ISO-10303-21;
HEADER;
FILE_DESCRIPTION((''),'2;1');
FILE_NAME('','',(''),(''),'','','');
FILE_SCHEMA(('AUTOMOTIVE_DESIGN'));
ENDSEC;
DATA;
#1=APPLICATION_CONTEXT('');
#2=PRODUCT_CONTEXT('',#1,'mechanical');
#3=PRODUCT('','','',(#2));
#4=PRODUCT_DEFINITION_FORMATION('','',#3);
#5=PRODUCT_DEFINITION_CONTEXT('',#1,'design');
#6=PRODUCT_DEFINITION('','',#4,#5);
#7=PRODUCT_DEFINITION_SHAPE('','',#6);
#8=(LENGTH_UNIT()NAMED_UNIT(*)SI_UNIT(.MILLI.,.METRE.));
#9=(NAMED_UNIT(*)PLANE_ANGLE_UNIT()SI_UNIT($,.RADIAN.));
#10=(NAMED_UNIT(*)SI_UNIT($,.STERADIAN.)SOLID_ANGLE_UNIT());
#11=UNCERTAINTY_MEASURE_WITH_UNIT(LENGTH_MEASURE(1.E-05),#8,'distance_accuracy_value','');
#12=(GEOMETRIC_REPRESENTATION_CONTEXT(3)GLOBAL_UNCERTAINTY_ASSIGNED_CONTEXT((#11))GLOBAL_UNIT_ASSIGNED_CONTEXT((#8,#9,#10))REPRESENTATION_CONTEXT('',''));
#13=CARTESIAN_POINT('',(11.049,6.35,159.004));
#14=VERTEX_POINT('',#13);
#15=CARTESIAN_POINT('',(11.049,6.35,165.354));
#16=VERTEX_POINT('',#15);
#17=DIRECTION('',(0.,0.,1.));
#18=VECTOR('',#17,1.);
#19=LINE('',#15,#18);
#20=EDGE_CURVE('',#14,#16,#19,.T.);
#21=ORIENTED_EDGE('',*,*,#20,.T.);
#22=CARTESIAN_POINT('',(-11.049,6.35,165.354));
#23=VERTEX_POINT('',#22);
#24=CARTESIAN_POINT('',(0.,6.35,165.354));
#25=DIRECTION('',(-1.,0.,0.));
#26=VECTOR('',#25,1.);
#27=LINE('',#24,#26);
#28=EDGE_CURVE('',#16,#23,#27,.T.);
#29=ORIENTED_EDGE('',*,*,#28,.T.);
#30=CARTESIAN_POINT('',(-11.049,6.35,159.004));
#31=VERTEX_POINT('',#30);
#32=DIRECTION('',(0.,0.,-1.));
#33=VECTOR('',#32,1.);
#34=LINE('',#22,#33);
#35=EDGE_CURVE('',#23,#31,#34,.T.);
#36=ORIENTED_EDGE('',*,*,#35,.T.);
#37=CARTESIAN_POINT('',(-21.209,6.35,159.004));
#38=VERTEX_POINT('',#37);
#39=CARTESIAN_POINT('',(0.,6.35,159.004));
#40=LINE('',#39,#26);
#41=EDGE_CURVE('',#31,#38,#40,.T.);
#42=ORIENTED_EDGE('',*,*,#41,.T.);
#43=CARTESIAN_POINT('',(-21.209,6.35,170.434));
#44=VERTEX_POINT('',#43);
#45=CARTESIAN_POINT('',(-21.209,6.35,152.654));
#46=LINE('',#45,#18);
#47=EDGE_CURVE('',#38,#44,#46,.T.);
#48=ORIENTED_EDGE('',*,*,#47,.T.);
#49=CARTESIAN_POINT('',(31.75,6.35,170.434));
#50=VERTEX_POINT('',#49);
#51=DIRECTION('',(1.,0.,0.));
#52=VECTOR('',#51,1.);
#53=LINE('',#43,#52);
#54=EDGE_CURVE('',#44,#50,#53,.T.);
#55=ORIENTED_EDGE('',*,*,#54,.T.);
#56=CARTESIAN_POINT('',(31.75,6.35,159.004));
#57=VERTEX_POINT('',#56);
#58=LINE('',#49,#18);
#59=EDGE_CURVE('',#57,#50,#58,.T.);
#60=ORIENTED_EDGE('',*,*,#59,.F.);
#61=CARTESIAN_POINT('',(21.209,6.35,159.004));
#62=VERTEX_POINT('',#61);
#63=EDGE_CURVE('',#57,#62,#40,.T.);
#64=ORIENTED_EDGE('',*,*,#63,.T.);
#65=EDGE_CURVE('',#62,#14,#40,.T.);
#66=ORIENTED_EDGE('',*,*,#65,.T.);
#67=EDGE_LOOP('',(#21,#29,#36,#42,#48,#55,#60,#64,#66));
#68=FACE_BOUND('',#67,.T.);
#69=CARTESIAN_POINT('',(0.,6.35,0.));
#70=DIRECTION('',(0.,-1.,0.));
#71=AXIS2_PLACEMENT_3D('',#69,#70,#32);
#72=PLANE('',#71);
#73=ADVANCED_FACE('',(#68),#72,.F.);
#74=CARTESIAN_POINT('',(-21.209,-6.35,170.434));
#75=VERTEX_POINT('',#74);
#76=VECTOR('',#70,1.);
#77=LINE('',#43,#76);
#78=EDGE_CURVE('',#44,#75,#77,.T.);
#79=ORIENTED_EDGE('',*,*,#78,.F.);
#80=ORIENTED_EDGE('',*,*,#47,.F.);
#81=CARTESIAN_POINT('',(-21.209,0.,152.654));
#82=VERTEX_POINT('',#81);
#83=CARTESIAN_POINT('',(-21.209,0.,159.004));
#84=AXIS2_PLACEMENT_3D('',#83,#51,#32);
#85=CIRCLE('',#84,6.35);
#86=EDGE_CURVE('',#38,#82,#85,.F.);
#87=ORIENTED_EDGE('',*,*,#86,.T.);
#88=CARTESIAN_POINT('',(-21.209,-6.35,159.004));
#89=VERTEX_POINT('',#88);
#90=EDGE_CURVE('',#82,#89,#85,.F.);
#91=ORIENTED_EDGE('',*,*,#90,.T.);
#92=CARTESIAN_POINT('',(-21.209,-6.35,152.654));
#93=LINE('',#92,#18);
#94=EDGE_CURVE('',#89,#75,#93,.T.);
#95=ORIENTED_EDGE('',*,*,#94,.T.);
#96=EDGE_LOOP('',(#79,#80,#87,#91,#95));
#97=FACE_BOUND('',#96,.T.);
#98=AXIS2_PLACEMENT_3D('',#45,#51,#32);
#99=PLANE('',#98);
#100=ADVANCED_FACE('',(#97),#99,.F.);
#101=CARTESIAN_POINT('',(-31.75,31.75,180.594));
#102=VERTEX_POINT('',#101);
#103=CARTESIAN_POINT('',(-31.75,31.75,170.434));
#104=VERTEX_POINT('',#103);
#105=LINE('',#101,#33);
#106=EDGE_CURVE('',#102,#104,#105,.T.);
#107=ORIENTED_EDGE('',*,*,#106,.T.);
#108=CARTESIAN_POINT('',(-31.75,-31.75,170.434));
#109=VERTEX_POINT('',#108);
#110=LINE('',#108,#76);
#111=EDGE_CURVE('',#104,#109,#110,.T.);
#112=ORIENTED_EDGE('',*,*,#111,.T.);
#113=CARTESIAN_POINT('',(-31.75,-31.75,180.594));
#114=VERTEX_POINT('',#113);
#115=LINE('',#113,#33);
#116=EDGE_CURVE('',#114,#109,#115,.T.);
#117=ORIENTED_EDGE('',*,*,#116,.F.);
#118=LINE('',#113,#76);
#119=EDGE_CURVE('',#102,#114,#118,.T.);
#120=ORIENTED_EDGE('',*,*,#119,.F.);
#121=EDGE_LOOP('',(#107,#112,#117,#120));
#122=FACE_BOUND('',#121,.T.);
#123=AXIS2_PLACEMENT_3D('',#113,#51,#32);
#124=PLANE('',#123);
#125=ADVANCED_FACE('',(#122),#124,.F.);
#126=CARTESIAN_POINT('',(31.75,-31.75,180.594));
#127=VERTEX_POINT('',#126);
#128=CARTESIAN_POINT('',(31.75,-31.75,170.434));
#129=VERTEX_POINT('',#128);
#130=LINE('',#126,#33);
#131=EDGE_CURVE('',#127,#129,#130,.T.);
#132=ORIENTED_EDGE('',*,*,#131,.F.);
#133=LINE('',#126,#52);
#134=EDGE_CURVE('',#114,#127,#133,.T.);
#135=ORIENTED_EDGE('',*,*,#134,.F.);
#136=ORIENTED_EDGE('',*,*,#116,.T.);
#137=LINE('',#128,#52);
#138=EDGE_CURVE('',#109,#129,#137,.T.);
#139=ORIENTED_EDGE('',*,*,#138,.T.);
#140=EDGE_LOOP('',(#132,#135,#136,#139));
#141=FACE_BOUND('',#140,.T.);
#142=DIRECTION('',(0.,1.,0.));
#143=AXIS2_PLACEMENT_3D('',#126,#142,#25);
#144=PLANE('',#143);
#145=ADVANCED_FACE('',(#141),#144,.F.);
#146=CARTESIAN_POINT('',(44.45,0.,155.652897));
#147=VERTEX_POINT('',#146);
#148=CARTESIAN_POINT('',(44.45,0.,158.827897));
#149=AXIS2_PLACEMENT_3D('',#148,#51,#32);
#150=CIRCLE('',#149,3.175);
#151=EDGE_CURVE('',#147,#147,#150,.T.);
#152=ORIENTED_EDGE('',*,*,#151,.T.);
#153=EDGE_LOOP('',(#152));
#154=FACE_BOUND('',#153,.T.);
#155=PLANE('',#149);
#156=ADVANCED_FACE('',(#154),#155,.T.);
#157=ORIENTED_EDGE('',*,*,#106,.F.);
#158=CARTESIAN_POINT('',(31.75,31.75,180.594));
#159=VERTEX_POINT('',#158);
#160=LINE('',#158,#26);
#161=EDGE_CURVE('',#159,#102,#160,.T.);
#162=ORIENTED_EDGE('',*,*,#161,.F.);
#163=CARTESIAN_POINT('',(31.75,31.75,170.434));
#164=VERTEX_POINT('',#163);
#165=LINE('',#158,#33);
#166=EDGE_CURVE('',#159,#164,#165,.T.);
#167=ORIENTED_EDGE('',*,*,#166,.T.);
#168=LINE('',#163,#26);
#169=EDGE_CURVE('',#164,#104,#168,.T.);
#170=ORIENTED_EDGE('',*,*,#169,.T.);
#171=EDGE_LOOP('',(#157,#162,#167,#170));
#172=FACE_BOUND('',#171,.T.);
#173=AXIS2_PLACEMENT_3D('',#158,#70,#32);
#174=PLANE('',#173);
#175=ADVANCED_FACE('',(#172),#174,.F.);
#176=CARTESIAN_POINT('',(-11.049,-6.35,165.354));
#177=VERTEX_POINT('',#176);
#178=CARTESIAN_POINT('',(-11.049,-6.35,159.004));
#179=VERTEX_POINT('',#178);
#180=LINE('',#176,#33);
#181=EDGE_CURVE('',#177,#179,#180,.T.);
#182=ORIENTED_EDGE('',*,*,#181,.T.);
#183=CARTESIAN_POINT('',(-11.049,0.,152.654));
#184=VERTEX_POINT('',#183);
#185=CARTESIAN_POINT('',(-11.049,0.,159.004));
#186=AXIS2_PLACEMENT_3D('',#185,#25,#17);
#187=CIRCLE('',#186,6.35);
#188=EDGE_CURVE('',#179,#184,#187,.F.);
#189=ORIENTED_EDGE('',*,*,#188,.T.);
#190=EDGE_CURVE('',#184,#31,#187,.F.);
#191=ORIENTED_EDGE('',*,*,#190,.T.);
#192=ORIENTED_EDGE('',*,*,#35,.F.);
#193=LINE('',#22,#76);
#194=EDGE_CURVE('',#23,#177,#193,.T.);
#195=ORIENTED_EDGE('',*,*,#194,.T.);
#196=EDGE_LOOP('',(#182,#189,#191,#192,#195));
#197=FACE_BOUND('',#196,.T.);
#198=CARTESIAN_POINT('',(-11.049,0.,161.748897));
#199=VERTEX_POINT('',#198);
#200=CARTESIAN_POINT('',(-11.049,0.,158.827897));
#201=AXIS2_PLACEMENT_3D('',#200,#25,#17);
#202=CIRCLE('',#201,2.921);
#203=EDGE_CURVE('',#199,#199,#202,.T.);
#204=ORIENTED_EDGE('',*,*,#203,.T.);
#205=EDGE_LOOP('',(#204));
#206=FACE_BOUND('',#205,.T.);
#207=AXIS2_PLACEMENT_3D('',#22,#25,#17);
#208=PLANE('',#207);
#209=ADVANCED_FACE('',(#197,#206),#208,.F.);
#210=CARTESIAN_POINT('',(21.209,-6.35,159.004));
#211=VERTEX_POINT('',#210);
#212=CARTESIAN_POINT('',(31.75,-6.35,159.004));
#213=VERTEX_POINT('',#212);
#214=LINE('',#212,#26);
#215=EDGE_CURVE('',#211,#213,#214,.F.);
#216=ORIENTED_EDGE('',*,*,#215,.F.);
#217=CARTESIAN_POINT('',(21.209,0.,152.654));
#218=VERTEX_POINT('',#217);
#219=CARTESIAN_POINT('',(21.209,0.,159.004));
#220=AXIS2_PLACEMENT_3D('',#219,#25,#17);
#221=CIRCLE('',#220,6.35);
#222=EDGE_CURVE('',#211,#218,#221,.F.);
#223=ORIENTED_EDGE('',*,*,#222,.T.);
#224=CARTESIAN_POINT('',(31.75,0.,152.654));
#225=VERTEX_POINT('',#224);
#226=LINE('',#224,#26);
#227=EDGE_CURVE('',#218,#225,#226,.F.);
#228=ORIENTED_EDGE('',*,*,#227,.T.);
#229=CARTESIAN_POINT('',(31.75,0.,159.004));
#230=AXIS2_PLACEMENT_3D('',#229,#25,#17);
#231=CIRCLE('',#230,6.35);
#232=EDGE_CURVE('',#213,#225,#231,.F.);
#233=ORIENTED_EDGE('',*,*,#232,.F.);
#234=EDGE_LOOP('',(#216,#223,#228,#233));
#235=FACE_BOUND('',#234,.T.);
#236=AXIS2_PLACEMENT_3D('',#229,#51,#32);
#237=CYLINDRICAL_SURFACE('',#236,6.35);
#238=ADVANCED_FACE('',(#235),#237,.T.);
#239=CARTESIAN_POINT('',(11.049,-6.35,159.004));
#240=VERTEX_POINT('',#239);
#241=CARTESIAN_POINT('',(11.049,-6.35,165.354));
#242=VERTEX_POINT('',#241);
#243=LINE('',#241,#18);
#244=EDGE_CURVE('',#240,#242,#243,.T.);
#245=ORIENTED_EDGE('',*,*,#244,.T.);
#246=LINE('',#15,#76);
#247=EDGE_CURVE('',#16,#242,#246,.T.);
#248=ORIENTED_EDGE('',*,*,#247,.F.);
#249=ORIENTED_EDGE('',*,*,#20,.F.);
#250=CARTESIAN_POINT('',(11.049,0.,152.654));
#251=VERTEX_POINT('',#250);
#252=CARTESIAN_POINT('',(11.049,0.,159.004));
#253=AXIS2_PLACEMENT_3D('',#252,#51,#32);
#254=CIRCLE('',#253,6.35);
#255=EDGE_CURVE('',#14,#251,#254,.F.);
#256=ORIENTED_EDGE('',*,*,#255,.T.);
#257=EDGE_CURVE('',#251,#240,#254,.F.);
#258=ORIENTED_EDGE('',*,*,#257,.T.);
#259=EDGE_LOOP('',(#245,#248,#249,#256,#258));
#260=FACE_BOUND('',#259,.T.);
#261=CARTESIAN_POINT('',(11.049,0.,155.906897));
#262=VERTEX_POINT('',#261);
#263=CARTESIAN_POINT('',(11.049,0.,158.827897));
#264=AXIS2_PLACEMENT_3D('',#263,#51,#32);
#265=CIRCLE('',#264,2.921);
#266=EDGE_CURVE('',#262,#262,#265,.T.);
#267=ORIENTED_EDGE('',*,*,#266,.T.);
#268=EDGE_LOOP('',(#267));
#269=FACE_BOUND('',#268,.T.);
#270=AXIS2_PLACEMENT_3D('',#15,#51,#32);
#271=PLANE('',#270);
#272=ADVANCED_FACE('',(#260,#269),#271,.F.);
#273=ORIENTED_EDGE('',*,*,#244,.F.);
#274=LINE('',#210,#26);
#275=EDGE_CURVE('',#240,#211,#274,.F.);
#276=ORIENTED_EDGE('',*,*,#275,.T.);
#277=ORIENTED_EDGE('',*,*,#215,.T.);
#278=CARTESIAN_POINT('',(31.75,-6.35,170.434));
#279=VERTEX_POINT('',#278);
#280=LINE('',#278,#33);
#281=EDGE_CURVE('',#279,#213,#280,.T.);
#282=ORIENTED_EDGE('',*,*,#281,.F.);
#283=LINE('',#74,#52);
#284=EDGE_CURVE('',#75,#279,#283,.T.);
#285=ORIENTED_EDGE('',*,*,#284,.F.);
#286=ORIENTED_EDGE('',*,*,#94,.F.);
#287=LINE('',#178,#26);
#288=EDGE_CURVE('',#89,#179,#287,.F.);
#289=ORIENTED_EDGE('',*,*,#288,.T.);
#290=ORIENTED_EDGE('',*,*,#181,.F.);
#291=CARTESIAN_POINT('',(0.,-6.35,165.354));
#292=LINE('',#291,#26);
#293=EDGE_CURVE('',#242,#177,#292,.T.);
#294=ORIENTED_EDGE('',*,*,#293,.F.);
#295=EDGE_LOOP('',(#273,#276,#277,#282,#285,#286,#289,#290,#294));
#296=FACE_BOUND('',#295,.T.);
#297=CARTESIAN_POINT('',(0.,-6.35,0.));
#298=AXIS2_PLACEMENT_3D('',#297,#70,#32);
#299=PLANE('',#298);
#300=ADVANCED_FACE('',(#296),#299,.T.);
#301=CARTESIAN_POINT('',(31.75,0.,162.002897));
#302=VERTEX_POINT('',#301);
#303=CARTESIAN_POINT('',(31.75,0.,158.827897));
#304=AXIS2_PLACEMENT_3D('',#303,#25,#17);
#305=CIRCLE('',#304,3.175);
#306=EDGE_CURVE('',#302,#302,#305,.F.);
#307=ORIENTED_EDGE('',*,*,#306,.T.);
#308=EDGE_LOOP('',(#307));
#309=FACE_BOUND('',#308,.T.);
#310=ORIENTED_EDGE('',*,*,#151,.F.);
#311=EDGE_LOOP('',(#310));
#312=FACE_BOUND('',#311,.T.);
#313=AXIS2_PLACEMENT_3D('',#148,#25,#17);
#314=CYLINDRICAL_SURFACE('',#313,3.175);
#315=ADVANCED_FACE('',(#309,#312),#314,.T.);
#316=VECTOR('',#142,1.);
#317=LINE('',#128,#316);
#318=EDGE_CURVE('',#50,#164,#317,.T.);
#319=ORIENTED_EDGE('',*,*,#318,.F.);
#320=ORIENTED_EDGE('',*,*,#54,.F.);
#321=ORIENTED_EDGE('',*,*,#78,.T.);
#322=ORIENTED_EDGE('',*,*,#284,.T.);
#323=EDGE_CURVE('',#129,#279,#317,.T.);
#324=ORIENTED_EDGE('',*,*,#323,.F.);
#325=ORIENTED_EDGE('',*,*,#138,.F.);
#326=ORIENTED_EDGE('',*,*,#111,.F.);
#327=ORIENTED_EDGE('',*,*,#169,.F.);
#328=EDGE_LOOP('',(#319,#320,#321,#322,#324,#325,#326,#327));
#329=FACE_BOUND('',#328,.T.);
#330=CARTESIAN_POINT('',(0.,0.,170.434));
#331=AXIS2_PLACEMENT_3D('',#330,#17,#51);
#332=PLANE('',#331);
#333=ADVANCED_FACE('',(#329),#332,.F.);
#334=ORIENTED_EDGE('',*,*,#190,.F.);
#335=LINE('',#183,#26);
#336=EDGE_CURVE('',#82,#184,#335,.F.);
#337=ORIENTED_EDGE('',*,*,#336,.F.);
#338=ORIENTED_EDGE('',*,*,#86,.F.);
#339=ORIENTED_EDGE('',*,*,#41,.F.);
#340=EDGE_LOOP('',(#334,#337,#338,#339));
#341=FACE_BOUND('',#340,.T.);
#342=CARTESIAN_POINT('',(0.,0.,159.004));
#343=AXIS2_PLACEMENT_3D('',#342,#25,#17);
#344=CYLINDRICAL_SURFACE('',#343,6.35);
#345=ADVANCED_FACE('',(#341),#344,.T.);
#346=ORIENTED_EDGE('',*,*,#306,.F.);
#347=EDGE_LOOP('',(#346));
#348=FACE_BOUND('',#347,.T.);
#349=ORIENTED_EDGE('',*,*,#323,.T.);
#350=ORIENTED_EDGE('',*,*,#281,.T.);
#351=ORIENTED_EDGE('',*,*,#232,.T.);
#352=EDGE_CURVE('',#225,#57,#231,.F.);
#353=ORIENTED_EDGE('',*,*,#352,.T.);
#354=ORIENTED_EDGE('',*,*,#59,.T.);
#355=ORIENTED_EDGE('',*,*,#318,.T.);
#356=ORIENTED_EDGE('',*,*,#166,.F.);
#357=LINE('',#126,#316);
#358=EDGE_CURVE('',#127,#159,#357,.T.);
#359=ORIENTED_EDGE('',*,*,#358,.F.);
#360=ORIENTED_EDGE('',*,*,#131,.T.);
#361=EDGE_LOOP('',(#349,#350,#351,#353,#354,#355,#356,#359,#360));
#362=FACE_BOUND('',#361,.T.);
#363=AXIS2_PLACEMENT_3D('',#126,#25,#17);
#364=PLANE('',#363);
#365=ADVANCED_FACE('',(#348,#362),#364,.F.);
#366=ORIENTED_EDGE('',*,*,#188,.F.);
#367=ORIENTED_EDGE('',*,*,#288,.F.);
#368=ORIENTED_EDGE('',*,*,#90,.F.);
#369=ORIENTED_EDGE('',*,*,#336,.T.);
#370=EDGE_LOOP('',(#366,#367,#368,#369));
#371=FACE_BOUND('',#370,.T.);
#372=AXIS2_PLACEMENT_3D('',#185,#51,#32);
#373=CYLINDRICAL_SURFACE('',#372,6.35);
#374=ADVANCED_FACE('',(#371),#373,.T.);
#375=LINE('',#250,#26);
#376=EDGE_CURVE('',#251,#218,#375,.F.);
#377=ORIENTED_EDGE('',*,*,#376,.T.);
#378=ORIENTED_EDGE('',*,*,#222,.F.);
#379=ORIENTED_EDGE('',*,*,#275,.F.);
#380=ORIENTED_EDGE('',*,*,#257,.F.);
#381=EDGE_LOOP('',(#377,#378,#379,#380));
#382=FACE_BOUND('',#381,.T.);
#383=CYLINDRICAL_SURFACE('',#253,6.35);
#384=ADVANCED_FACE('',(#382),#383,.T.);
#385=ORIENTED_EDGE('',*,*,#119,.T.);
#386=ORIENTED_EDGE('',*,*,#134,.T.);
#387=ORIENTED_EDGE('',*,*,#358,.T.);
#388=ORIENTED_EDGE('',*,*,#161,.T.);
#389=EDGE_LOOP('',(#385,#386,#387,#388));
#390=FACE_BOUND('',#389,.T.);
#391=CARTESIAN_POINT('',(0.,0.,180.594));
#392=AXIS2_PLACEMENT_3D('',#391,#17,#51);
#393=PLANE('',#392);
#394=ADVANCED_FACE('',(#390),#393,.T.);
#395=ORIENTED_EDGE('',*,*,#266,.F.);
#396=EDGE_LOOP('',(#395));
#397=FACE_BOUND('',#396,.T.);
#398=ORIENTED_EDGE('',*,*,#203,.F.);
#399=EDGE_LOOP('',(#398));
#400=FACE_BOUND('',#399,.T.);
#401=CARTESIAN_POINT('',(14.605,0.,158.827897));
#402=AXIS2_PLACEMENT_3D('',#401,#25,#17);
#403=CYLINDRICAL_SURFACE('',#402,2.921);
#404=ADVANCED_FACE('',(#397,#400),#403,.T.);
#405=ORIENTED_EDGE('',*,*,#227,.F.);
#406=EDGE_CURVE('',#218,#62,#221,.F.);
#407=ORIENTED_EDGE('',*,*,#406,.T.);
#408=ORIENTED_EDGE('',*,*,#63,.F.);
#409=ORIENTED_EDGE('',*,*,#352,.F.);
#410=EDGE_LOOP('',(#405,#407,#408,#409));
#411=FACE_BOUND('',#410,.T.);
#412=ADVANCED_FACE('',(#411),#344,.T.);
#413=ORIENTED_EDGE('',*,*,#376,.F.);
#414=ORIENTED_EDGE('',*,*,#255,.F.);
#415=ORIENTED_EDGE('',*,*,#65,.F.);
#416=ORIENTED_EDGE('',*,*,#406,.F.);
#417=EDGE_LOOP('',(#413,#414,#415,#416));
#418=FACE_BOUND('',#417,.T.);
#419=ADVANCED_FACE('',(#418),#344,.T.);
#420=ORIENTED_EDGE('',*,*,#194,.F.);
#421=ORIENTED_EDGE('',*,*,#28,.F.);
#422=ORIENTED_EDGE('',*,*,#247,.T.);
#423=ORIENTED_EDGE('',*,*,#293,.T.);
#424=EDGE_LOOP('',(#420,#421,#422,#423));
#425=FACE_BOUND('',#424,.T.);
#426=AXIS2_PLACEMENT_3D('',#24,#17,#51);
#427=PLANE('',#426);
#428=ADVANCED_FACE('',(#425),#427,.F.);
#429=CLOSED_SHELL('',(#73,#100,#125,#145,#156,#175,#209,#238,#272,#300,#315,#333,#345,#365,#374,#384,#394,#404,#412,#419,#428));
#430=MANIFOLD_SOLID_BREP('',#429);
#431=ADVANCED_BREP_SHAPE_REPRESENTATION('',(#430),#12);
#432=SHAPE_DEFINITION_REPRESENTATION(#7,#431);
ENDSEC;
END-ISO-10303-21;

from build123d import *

# Parameters (mm, degrees)
SKETCH1_R            = 12.7
BOSS_EXTRUDE3_DEPTH  = 152.4
SKETCH9_R            = 6.35
BOSS_EXTRUDE6_DEPTH  = 19.05
SKETCH16_W           = 25.4
SKETCH16_H           = 63.5
CUT_EXTRUDE2_DEPTH   = 155.762931731
SKETCH17_W           = 25.4
SKETCH17_H           = 63.5
CUT_EXTRUDE3_DEPTH   = 155.762931731
SKETCH19_R           = 2.54
CUT_EXTRUDE5_DEPTH   = 155.762931731
SKETCH21_W           = 21.59
SKETCH21_H           = 12.7
BOSS_EXTRUDE8_DEPTH  = 12.7
BOSS_EXTRUDE9_DEPTH  = 6.35
SKETCH25_R           = 3.175
CUT_EXTRUDE7_DEPTH   = 21.59
SKETCH29_R           = 2.921
BOSS_EXTRUDE10_DEPTH = 35.814
FILLET2_R            = 6.35
FILLET3_R            = 6.35
SKETCH31_W           = 63.5
SKETCH31_H           = 63.5
BOSS_EXTRUDE11_DEPTH = 10.16
SKETCH32_W           = 127
SKETCH32_H           = 307.417558359
CUT_EXTRUDE8_DEPTH   = 195.047688304
SKETCH33_W           = 21.59
SKETCH33_H           = 12.7
CUT_EXTRUDE9_DEPTH   = 195.047688304
SKETCH29_2_R         = 2.921
BOSS_EXTRUDE12_DEPTH = 35.814
SKETCH37_W           = 17.78
SKETCH37_H           = 12.7
BOSS_EXTRUDE13_DEPTH = 10.541
FILLET5_R            = 6.35
SKETCH38_R           = 3.175
BOSS_EXTRUDE14_DEPTH = 12.7


with BuildPart() as part:
    # Sketch1 → Boss-Extrude3 (new, symmetric)
    with BuildSketch(Plane.XY):
        with Locations(Location((0, 0, 0), (0, 0, 180))):
            Circle(SKETCH1_R)
    extrude(amount=BOSS_EXTRUDE3_DEPTH, both=True)

    # Sketch9 → Boss-Extrude6 (add, symmetric)
    with BuildSketch(Plane(origin=(0, 0, 0), x_dir=(0, 0, -1), z_dir=(1, 0, 0))):
        with Locations((-25.4, 0)):
            Circle(SKETCH9_R)
    extrude(amount=BOSS_EXTRUDE6_DEPTH, both=True)

    # Sketch16 → Cut-Extrude2 (cut, through all)
    with BuildSketch(Plane(origin=(0, -6.35, 0), x_dir=(1, 0, 0), z_dir=(0, 1, 0))):
        with Locations((0, 120.65)):
            Rectangle(SKETCH16_W, SKETCH16_H)
    extrude(amount=-CUT_EXTRUDE2_DEPTH, mode=Mode.SUBTRACT)

    # Sketch17 → Cut-Extrude3 (cut, through all)
    with BuildSketch(Plane(origin=(0, 6.35, 0), x_dir=(1, 0, 0), z_dir=(0, 1, 0))):
        with Locations((0, 120.65)):
            Rectangle(SKETCH17_W, SKETCH17_H)
    extrude(amount=CUT_EXTRUDE3_DEPTH, mode=Mode.SUBTRACT)

    # Sketch19 → Cut-Extrude5 (cut, through all)
    with BuildSketch(Plane(origin=(0, 6.35, 0), x_dir=(1, 0, 0), z_dir=(0, 1, 0))):
        with Locations(Location((0, 100.80625, 0), (0, 0, 270))):
            Circle(SKETCH19_R)
        with Locations(Location((0, 136.525, 0), (0, 0, 270))):
            Circle(SKETCH19_R)
    extrude(amount=-CUT_EXTRUDE5_DEPTH, mode=Mode.SUBTRACT)

    # Sketch21 → Boss-Extrude8 (add)
    with BuildSketch(Plane.XY.offset(152.4)):
        Rectangle(SKETCH21_W, SKETCH21_H)
    extrude(amount=BOSS_EXTRUDE8_DEPTH)

    # Sketch25 → Cut-Extrude7 (cut)
    with BuildSketch(Plane.ZY.offset(10.795)):
        with Locations(Location((158.75, 0, 0), (0, 0, 270))):
            Circle(SKETCH25_R)
    extrude(amount=-CUT_EXTRUDE7_DEPTH, mode=Mode.SUBTRACT)

    # Fillet3
    fillet3_edges = [part.edges().sort_by_distance(p)[0] for p in [
        (0, -6.35, 165.1),
        (0, 6.35, 165.1),
    ]]
    fillet(fillet3_edges, radius=FILLET3_R - 0.0001)  # a hair under: the kernel refuses the full size

    # Sketch32 → Cut-Extrude8 (cut, through all)
    with BuildSketch(Plane(origin=(0, 31.75, 0), x_dir=(1, 0, 0), z_dir=(0, 1, 0))):
        with Locations((19.549323816, 1.30877918)):
            Rectangle(SKETCH32_W, SKETCH32_H)
    extrude(amount=-CUT_EXTRUDE8_DEPTH, mode=Mode.SUBTRACT)


with BuildPart() as body_2:
    # Sketch27 → Boss-Extrude9 (new, symmetric)
    with BuildSketch(Plane(origin=(0, 0, 0), x_dir=(1, 0, 0), z_dir=(0, 1, 0))):
        Polygon((0, -165.354), (11.049, -165.354), (11.049, -152.654), (21.209, -152.654), (21.209, -170.434), (-21.209, -170.434), (-21.209, -152.654), (-11.049, -152.654), (-11.049, -165.354), align=None)
    extrude(amount=BOSS_EXTRUDE9_DEPTH, both=True)

    # Sketch29 → Boss-Extrude10 (add)
    with BuildSketch(Plane.ZY.offset(21.209)):
        with Locations((158.827896988, 0)):
            Circle(SKETCH29_R)
    extrude(amount=-BOSS_EXTRUDE10_DEPTH)

    # Fillet2
    fillet2_edges = [body_2.edges().sort_by_distance(p)[0] for p in [
        (16.129, -6.35, 152.654),
        (16.129, 6.35, 152.654),
        (-16.129, -6.35, 152.654),
        (-16.129, 6.35, 152.654),
    ]]
    fillet(fillet2_edges, radius=FILLET2_R - 0.0001)  # a hair under: the kernel refuses the full size

    # Sketch31 → Boss-Extrude11 (add)
    with BuildSketch(Plane.XY.offset(170.434)):
        Rectangle(SKETCH31_W, SKETCH31_H)
    extrude(amount=BOSS_EXTRUDE11_DEPTH)


with BuildPart() as cut_extrude9_tool:
    # Sketch33 → Cut-Extrude9 (new, through all)
    with BuildSketch(Plane(origin=(0, 31.75, 0), x_dir=(1, 0, 0), z_dir=(0, 1, 0))):
        with Locations((0, -158.75)):
            Rectangle(SKETCH33_W, SKETCH33_H)
    extrude(amount=-CUT_EXTRUDE9_DEPTH)


with BuildPart() as part_1:
    add(part.part)

    # Cut-Extrude9: cut by cut_extrude9_tool
    add(cut_extrude9_tool.part, mode=Mode.SUBTRACT)


with BuildPart() as body_2_1:
    add(body_2.part)

    # Cut-Extrude9: cut by cut_extrude9_tool
    add(cut_extrude9_tool.part, mode=Mode.SUBTRACT)

    # Sketch29<2> → Boss-Extrude12 (add)
    with BuildSketch(Plane.ZY.offset(21.209)):
        with Locations((158.827896988, 0)):
            Circle(SKETCH29_2_R)
    extrude(amount=-BOSS_EXTRUDE12_DEPTH)

    # Sketch37 → Boss-Extrude13 (add)
    with BuildSketch(Plane(origin=(21.209, 0, 0), x_dir=(0, 0, -1), z_dir=(1, 0, 0))):
        with Locations((-161.544, 0)):
            Rectangle(SKETCH37_W, SKETCH37_H)
    extrude(amount=BOSS_EXTRUDE13_DEPTH)

    # Fillet5
    fillet5_edges = [body_2_1.edges().sort_by_distance(p)[0] for p in [
        (26.4795, -6.35, 152.654),
        (26.4795, 6.35, 152.654),
    ]]
    fillet(fillet5_edges, radius=FILLET5_R - 0.0001)  # a hair under: the kernel refuses the full size

    # Sketch38 → Boss-Extrude14 (add)
    with BuildSketch(Plane(origin=(31.75, 0, 0), x_dir=(0, 0, -1), z_dir=(1, 0, 0))):
        with Locations(Location((-158.827896988, 0, 0), (0, 0, 180))):
            Circle(SKETCH38_R)
    extrude(amount=BOSS_EXTRUDE14_DEPTH)


solid = body_2_1.part
